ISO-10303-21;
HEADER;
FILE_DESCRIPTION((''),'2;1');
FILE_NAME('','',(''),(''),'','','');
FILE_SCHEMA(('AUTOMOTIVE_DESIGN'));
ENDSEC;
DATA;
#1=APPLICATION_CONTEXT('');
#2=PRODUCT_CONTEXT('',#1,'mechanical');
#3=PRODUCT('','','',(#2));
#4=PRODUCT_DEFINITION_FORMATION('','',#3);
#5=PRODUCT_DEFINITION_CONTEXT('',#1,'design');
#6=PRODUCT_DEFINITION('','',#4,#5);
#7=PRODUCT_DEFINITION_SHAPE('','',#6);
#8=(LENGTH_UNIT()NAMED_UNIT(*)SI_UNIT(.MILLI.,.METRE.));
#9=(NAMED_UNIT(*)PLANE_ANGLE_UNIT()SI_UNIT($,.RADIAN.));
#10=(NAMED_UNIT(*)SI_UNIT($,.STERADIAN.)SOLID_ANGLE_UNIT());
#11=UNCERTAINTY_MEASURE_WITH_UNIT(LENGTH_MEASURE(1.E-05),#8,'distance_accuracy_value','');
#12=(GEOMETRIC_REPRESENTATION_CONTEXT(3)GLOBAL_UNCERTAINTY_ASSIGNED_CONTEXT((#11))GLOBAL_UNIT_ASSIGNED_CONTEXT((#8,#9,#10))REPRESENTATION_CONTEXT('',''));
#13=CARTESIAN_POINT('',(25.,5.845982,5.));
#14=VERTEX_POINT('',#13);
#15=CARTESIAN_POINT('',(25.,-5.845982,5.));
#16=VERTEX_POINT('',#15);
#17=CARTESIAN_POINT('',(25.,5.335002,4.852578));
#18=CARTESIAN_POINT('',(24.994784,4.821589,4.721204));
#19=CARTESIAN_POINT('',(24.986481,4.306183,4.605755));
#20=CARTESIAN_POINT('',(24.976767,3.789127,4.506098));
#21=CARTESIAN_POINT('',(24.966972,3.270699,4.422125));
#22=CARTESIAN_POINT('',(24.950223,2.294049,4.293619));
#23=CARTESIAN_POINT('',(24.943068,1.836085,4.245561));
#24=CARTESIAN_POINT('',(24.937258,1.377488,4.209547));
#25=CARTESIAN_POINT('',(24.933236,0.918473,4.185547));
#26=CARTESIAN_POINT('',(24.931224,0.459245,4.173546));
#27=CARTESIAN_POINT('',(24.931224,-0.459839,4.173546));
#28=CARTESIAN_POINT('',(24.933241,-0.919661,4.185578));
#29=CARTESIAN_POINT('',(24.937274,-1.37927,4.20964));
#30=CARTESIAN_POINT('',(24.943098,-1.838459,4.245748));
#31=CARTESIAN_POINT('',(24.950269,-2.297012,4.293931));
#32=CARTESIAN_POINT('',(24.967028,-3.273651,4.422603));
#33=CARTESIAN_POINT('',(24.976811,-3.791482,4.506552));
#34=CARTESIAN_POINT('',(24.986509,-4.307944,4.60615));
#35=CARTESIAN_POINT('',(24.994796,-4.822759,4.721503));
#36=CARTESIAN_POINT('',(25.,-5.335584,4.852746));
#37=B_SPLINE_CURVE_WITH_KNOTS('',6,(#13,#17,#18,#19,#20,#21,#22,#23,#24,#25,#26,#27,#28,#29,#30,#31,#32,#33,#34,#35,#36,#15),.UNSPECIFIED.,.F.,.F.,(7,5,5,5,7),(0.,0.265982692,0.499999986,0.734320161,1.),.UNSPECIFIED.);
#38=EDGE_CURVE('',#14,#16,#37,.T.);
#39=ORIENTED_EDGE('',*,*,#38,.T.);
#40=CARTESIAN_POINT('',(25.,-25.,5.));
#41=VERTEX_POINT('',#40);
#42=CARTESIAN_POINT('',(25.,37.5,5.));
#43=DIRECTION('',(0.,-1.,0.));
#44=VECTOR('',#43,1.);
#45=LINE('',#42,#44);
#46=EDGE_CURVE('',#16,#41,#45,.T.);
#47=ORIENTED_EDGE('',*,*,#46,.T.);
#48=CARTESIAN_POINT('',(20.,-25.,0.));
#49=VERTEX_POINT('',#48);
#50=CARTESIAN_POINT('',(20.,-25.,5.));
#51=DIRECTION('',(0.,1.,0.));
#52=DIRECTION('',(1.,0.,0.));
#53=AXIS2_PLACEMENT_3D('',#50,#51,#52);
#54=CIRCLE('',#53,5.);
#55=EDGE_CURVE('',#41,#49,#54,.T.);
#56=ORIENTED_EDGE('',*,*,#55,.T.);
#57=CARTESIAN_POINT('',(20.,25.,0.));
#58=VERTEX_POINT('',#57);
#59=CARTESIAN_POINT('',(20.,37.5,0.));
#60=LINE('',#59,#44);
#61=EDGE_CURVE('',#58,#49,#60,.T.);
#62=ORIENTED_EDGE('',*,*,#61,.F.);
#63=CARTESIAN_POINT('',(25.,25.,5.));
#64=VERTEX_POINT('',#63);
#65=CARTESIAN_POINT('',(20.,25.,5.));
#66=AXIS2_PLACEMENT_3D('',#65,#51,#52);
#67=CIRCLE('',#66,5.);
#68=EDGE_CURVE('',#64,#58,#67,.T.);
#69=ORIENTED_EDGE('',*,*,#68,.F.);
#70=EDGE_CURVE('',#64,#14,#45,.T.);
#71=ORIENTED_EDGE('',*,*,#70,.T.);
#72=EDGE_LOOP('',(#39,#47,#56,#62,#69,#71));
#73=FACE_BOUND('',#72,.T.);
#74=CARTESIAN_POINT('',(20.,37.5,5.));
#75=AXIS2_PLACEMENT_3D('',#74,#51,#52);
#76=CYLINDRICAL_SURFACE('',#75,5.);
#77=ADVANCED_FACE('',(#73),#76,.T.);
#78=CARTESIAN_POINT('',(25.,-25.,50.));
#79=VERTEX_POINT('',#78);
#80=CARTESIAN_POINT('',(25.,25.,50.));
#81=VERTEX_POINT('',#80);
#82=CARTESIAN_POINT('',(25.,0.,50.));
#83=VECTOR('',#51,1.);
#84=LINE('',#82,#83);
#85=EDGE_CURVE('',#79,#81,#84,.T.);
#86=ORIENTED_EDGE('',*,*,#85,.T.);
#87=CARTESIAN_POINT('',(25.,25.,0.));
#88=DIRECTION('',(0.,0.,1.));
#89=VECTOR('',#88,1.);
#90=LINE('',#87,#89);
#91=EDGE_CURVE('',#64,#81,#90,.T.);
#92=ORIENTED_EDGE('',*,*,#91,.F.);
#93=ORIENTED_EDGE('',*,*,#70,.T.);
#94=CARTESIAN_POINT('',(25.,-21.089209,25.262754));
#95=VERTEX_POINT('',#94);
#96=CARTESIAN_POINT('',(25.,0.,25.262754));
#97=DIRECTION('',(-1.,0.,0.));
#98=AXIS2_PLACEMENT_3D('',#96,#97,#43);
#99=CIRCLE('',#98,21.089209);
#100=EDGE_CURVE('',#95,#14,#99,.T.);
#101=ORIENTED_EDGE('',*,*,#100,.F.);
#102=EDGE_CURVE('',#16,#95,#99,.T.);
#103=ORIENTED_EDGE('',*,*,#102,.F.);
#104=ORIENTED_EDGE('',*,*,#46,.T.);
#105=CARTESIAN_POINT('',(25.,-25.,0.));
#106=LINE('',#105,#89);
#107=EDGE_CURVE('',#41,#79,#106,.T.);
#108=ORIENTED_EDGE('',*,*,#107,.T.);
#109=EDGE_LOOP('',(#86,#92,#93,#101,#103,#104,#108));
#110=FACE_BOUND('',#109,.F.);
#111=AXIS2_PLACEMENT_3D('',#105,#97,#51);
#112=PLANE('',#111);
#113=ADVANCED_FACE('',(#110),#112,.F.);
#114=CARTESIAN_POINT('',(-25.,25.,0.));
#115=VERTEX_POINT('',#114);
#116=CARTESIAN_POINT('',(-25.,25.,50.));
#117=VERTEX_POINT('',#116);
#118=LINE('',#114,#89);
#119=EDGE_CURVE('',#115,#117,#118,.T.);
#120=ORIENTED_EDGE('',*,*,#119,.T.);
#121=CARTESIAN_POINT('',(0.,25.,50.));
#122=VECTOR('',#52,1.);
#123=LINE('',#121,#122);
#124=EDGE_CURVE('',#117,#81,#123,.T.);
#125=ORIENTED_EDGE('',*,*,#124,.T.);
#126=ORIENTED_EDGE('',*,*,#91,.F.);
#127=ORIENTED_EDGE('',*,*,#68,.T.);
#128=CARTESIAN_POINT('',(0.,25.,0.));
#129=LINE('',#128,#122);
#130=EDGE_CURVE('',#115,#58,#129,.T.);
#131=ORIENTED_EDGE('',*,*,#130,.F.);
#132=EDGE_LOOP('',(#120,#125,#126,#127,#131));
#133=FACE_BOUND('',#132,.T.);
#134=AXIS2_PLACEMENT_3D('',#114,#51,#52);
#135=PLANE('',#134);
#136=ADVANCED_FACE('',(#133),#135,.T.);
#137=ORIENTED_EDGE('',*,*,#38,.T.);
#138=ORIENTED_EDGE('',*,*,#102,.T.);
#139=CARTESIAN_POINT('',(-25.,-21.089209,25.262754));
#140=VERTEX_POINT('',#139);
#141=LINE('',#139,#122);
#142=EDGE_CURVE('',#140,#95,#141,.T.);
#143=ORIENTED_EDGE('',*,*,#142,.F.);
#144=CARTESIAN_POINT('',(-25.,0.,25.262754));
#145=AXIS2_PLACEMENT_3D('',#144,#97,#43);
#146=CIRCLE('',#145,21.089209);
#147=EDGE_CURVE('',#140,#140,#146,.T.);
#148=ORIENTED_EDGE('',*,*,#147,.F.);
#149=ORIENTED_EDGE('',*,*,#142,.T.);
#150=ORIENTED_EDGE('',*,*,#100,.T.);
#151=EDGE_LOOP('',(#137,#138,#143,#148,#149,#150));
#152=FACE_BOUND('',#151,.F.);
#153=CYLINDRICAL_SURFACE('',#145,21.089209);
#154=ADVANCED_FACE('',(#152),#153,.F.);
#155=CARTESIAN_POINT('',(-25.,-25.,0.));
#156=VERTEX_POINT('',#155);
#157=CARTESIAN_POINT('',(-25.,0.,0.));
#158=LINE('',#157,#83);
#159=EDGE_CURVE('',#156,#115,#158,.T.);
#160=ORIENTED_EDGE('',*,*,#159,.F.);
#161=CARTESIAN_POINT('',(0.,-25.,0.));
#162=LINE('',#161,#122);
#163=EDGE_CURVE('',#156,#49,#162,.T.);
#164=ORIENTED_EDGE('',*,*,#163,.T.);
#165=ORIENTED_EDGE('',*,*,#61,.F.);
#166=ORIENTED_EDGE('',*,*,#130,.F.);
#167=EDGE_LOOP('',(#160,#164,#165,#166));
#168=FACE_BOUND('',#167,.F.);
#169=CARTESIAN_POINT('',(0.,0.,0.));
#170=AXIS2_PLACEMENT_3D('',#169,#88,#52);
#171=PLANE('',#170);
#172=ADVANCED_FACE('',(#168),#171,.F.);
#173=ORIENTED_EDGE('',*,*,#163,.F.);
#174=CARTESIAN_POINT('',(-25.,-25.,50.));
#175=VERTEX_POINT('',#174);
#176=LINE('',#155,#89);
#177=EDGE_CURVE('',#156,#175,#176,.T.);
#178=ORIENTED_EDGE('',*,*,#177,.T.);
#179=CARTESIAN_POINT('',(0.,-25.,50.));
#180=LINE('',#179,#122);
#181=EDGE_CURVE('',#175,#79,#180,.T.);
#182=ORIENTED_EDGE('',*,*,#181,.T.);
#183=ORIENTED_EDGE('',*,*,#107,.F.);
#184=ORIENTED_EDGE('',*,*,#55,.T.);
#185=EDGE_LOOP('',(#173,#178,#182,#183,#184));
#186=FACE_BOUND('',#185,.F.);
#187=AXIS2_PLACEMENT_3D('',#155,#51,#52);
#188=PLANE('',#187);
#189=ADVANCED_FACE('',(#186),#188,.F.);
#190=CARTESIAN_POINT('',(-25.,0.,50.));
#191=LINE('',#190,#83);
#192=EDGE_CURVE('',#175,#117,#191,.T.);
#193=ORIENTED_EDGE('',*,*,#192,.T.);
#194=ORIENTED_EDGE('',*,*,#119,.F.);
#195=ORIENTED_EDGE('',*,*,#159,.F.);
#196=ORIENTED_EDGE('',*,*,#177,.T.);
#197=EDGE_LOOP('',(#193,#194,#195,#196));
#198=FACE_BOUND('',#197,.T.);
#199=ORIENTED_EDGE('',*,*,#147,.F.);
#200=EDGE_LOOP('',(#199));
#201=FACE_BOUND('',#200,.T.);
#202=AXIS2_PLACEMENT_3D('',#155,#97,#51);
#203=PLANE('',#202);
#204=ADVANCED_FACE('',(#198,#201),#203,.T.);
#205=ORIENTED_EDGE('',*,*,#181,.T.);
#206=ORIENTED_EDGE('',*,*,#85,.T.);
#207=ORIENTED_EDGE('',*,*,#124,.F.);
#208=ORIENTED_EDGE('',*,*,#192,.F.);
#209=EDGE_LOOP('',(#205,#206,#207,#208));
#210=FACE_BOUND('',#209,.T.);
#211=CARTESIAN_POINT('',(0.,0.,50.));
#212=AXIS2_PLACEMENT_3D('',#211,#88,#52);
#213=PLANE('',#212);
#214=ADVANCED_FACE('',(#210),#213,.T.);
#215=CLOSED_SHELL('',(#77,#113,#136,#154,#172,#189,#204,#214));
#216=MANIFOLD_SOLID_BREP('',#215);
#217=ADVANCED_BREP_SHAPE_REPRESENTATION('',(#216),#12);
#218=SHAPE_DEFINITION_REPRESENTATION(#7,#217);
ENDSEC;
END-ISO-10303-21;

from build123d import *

# Parameters (mm, degrees)
F0_W        = 50
F0_H        = 50
F1_DEPTH    = 50
F2_R        = 21.0892085761
F4_DEPTH    = 50.001
F3_T1_DEPTH = 75


# Not quite as in the source:
# - a fillet or chamfer that OpenCascade refuses, or shapes differently, is made with other operations: its cross-section is extruded or revolved along the edge and cut away or added


with BuildPart() as f1:
    # F0 (on Top) → F1 (new body)
    with BuildSketch(Plane.XY):
        Rectangle(F0_W, F0_H)
    extrude(amount=F1_DEPTH)

    # F2 (on face) → F4 (cut, through all)
    with BuildSketch(Plane(origin=(-25, 0, 0), x_dir=(0, -1, 0), z_dir=(-1, 0, 0))):
        with Locations((0, 25.2627544105)):
            Circle(F2_R)
    extrude(amount=-F4_DEPTH, mode=Mode.SUBTRACT)

    # F3: fillet of radius 5 on 1 edges, made by hand

    # F3_s2 → F3_t1 (cut)
    with BuildSketch(Plane.XZ.offset(-37.5)):
        with BuildLine():
            ThreePointArc((25, 5), (23.5355339059, 1.4644660941), (20, 0))
            Line((20, 0), (25, 0))
            Line((25, 0), (25, 5))
        make_face()
    extrude(amount=F3_T1_DEPTH, mode=Mode.SUBTRACT)


solid = f1.part
